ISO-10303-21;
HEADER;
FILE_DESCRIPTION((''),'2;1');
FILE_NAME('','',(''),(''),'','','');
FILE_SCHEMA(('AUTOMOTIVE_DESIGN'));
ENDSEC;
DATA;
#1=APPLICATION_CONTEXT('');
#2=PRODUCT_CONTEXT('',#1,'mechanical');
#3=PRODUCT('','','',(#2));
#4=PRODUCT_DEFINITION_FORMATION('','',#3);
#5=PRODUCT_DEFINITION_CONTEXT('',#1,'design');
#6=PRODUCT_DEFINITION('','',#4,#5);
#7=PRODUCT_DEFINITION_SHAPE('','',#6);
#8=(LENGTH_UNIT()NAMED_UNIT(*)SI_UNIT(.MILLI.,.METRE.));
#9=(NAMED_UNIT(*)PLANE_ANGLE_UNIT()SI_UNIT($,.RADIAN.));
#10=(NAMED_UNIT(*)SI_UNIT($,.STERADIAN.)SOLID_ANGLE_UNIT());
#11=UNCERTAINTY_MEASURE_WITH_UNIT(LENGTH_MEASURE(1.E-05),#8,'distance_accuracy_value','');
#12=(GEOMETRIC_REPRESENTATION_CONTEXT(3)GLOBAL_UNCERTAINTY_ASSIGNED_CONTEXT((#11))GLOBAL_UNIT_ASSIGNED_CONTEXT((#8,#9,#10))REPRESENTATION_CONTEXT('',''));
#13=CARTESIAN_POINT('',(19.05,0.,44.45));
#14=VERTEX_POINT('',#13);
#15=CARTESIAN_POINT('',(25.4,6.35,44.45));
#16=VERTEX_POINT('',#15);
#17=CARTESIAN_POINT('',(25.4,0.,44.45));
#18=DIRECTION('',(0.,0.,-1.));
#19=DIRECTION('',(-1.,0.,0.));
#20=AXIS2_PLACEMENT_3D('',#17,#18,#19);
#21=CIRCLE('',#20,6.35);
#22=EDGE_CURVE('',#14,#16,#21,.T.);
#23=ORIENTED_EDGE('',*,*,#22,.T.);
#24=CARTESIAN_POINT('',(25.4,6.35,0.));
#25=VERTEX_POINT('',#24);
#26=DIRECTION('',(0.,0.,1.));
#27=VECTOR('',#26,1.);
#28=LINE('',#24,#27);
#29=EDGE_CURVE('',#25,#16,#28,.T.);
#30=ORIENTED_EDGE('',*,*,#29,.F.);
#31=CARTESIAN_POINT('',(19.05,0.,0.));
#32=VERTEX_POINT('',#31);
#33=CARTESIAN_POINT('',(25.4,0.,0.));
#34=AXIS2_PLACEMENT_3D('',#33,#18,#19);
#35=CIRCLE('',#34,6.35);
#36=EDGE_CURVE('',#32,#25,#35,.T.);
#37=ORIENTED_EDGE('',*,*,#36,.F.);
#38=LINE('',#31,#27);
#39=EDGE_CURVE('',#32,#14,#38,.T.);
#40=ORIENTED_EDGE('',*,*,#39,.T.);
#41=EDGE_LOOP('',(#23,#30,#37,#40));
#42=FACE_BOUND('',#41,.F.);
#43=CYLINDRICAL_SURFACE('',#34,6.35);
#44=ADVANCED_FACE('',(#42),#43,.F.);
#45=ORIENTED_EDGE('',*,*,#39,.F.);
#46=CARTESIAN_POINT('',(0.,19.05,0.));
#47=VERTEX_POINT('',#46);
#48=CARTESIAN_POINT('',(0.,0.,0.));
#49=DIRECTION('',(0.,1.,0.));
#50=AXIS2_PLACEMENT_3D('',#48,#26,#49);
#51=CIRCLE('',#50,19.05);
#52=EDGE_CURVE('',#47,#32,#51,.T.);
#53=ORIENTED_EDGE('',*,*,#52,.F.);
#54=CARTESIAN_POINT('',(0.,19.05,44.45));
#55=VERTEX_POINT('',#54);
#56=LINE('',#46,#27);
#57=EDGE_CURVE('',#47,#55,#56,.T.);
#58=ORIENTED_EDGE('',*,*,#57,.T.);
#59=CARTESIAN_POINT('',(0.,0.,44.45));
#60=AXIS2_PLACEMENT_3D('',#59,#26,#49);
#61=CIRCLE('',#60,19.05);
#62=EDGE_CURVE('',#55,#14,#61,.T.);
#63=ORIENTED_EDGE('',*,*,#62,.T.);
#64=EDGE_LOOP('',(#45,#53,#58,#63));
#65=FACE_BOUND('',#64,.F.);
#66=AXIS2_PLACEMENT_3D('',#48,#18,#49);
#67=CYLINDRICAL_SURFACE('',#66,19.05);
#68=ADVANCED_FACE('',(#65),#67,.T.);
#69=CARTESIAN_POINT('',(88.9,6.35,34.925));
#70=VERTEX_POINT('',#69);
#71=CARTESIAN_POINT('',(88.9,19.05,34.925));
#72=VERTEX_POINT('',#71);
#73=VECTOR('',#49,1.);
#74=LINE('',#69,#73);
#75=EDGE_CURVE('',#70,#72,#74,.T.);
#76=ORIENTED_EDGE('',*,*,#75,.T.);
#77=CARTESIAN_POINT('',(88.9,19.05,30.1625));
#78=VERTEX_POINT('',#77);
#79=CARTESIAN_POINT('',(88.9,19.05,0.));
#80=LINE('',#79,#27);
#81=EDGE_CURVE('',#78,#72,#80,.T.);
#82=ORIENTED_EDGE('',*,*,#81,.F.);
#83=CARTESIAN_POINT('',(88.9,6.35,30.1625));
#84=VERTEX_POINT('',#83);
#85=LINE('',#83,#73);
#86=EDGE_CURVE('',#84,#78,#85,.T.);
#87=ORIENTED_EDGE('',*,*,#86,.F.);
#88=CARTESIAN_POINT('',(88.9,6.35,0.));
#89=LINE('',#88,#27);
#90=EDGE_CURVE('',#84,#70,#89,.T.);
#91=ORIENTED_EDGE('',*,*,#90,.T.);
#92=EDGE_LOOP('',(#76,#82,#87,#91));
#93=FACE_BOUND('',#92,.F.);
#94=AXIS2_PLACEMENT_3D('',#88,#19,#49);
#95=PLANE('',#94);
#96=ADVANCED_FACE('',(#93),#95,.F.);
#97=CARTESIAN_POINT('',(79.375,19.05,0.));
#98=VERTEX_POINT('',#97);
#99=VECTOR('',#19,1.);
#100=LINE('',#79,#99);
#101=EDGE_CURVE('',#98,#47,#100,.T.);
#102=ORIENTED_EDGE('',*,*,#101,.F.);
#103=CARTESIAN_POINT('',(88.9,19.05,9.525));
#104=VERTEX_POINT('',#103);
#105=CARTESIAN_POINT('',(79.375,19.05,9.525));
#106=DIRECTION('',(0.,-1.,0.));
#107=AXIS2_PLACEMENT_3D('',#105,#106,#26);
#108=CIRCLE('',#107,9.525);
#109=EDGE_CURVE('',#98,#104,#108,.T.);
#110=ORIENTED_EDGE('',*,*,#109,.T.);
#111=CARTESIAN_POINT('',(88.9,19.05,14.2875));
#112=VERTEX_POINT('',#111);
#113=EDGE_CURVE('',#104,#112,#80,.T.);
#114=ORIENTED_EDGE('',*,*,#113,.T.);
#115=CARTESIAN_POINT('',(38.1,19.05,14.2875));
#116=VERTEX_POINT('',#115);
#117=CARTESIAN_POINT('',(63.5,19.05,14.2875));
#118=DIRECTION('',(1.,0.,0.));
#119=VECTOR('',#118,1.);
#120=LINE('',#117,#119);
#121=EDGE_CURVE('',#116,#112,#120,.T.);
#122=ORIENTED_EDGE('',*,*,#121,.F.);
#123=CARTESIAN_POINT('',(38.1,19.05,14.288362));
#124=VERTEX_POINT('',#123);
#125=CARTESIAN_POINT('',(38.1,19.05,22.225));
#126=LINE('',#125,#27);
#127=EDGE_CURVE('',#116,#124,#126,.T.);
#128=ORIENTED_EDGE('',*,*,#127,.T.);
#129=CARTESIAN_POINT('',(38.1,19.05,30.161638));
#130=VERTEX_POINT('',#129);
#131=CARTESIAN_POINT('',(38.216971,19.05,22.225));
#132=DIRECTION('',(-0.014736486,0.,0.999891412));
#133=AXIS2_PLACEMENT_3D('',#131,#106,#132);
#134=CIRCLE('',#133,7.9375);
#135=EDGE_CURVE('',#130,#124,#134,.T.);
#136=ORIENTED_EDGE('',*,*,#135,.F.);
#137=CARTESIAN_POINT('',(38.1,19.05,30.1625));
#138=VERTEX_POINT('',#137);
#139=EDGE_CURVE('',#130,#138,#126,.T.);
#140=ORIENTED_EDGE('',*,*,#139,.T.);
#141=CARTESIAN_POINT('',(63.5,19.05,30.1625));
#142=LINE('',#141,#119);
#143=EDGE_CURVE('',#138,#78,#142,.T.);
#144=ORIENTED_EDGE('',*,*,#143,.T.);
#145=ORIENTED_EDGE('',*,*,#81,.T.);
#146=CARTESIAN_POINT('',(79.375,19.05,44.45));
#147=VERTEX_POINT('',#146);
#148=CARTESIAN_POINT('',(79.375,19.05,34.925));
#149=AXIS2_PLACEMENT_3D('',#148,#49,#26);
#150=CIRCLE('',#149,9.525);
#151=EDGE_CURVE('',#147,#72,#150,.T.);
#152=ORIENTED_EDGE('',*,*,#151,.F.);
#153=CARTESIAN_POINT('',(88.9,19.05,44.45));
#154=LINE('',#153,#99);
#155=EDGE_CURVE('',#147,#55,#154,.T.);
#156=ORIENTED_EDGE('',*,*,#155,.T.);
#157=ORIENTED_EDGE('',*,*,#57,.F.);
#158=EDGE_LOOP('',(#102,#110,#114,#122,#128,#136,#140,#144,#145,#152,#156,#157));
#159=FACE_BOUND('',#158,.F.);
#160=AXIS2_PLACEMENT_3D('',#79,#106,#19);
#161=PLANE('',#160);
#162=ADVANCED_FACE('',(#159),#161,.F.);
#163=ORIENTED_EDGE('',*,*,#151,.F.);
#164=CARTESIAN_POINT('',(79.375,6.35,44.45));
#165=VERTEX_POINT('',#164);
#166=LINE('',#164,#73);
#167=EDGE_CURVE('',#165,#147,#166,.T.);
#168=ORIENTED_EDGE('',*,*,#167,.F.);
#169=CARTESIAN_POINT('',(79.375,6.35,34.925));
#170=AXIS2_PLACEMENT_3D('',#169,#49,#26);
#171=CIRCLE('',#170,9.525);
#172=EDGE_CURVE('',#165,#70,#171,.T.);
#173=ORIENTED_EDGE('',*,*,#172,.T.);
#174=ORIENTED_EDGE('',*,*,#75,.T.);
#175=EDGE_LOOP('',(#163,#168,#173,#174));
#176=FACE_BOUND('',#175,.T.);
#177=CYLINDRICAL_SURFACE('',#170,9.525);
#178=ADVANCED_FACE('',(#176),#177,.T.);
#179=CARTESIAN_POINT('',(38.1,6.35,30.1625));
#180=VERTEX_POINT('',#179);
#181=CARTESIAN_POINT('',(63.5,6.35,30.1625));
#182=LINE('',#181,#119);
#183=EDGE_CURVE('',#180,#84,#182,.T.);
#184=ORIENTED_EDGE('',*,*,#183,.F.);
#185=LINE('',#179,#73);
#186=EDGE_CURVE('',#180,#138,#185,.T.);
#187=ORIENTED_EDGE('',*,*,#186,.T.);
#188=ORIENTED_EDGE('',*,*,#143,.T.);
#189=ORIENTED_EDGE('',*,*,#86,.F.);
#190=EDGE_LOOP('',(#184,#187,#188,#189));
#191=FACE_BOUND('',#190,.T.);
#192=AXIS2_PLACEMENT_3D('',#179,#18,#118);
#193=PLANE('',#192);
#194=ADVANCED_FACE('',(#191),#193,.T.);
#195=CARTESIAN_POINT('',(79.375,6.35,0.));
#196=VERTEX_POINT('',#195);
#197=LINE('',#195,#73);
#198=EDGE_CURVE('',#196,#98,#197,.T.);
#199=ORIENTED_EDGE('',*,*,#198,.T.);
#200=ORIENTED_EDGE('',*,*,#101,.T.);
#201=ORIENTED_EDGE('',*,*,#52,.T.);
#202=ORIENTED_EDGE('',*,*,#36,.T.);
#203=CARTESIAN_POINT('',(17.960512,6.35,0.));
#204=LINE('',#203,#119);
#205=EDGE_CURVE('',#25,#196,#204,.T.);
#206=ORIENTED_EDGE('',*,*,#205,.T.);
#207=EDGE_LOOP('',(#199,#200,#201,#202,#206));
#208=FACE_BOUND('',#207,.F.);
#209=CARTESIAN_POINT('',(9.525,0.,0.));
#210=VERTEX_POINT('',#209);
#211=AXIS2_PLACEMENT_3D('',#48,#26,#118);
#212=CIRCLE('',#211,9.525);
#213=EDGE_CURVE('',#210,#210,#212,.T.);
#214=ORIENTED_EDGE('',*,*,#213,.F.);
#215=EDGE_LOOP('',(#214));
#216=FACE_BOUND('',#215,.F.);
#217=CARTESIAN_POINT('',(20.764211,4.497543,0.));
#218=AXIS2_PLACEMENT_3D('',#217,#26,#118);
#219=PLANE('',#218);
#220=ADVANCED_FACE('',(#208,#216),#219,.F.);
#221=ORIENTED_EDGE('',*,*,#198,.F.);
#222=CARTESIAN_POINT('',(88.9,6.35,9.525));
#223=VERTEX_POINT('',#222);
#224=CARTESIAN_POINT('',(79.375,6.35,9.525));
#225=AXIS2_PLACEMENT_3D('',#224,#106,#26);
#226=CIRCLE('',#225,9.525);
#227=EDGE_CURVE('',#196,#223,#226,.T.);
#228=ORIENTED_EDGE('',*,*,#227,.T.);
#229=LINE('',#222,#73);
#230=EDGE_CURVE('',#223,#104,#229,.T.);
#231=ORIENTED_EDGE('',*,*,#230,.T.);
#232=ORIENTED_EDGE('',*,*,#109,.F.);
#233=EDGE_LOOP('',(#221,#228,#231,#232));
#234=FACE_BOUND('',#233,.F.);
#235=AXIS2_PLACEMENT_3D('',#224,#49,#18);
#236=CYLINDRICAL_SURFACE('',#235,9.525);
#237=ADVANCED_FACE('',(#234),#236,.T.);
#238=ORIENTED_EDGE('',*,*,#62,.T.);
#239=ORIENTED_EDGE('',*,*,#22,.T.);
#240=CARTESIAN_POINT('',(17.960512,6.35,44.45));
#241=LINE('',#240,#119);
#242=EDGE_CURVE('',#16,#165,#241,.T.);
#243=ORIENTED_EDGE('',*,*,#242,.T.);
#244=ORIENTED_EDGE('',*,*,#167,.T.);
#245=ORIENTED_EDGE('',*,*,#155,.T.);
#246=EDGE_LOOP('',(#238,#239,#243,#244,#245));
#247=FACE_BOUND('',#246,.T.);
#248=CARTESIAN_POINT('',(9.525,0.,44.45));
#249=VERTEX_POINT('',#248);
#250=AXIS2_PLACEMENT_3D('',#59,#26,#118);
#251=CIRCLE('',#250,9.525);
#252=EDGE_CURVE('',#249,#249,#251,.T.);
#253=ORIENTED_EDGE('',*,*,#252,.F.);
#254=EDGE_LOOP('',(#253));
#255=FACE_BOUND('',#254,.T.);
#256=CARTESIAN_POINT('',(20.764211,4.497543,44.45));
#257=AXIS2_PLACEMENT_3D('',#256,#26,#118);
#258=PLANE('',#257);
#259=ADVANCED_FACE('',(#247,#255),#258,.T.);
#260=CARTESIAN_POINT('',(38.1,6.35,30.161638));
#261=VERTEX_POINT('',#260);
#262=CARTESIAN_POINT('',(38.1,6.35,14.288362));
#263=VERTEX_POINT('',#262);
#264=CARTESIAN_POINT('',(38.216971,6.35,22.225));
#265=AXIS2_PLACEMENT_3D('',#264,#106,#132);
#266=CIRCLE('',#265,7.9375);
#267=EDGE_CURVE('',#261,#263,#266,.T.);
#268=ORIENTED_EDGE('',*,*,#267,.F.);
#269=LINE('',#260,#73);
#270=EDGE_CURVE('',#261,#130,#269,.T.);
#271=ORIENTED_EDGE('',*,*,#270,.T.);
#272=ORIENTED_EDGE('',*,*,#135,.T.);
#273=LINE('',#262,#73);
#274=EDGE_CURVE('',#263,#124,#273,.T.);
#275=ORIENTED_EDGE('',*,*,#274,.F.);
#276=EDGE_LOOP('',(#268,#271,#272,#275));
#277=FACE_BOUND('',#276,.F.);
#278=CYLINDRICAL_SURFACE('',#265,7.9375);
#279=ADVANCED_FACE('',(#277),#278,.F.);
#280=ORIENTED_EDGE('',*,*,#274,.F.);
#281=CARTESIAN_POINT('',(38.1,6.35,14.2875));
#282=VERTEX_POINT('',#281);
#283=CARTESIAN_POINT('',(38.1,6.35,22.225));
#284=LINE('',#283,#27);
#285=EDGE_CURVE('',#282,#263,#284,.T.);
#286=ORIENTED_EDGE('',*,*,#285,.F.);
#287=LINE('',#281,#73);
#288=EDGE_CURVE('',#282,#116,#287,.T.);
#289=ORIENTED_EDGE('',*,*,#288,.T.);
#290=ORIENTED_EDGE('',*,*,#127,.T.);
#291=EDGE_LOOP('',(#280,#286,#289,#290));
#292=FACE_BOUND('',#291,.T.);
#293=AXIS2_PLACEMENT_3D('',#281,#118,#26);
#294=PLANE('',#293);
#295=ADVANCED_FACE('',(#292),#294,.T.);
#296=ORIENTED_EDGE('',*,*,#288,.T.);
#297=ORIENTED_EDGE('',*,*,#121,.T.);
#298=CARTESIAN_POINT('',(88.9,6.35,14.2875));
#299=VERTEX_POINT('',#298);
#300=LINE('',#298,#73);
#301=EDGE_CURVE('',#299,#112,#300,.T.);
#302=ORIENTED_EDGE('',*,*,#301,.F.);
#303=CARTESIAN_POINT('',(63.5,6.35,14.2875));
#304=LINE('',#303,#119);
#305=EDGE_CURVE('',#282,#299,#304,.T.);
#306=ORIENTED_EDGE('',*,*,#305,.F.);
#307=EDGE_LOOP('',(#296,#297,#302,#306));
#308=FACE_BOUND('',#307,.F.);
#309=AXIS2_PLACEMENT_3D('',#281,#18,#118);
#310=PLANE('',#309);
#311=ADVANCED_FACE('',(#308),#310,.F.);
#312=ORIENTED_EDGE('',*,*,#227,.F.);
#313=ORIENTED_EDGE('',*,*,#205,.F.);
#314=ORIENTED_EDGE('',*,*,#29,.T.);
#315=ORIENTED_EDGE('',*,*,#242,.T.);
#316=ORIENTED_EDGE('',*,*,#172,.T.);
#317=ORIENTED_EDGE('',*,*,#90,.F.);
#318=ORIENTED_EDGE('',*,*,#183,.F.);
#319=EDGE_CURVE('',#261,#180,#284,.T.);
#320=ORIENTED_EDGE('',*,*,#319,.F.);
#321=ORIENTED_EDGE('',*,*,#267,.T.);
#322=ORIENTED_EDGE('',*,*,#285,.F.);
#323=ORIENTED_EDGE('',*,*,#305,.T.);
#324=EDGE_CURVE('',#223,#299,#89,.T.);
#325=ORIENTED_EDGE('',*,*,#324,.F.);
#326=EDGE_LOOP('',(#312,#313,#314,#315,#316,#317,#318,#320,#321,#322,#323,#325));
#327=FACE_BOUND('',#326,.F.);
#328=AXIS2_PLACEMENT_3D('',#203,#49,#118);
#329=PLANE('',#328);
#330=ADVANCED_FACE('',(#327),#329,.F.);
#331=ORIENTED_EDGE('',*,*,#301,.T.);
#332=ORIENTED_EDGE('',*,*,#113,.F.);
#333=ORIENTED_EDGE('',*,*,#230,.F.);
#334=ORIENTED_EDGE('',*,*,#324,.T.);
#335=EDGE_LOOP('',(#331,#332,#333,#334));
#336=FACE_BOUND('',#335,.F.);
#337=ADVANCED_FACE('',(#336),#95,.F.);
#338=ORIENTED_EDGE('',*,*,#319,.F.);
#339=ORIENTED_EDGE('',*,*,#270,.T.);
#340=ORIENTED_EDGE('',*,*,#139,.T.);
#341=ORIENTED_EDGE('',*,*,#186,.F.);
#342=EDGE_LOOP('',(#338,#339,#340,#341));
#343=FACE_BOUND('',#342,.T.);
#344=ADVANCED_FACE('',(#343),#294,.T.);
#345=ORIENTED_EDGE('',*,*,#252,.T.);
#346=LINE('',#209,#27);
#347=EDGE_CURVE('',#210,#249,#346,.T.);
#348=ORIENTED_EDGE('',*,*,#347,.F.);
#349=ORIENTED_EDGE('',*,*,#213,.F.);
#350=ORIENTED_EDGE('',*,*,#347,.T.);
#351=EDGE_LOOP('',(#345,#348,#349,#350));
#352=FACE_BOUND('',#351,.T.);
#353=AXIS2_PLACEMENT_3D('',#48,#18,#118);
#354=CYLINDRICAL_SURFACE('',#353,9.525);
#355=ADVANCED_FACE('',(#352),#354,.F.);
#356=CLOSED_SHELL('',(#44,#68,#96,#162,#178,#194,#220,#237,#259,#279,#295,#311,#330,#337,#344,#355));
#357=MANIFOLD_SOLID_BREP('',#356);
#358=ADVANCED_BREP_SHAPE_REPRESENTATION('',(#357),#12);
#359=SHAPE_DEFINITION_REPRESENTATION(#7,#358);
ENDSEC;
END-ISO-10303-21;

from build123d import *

# Parameters (mm, degrees)
F0_R        = 9.525
F1_DEPTH    = 44.45
F2_W        = 50.8
F2_H        = 15.875
F4_DEPTH    = 12.7
F5_R        = 9.525
F6_T1_DEPTH = 44.45


# Not quite as in the source:
# - a fillet or chamfer that OpenCascade refuses, or shapes differently, is made with other operations: its cross-section is extruded or revolved along the edge and cut away or added
# - a length typed as a fraction of an inch, garbled in the dataset ("3 / 203.2 mm" for 3/8 in), is restored


with BuildPart() as f1:
    # F0 (on Top) → F1 (new body)
    with BuildSketch(Plane.XY):
        with BuildLine():
            ThreePointArc((0, 19.05), (-13.4703841816, -13.4703841816), (19.05, 0))
            ThreePointArc((19.05, 0), (18.7756525614, 3.2213926947), (17.9605122421, 6.35))
            ThreePointArc((17.9605122421, 6.35), (10.9985226281, 15.5542598667), (0, 19.05))
        make_face()
        Circle(F0_R, mode=Mode.SUBTRACT)
        with BuildLine():
            ThreePointArc((0, 19.05), (10.9985226281, 15.5542598667), (17.9605122421, 6.35))
            Line((17.9605122421, 6.35), (88.9, 6.35))
            Line((88.9, 6.35), (88.9, 19.05))
            Line((88.9, 19.05), (0, 19.05))
        make_face()
    extrude(amount=F1_DEPTH)

    # F3 (on face) + F2 (on face) → F4 (cut)
    with BuildSketch(Plane.XZ.offset(-6.35)):
        with BuildLine():
            Line((38.1, 14.2883619165), (38.1, 30.1616380835))
            ThreePointArc((38.1, 30.1616380835), (30.279470861, 22.225), (38.1, 14.2883619165))
        make_face()
    with BuildSketch(Plane.XZ.offset(-6.35)):
        with Locations((63.5, 22.225)):
            Rectangle(F2_W, F2_H)
    extrude(amount=-F4_DEPTH, mode=Mode.SUBTRACT)

    # F5
    f5_edges = [f1.edges().sort_by_distance(p)[0] for p in [
        (88.9, 12.7, 44.45),
        (88.9, 12.7, 0),
    ]]
    fillet(f5_edges, radius=F5_R)

    # F6: fillet of radius 6.35 on 1 edges, made by hand

    # F6_s2 → F6_t1 (join)
    with BuildSketch(Plane.XY):
        with BuildLine():
            ThreePointArc((19.05, 0), (20.9098719395, 4.4901280605), (25.4, 6.35))
            Line((25.4, 6.35), (17.9605122421, 6.35))
            ThreePointArc((17.9605122421, 6.35), (18.7756525614, 3.2213926947), (19.05, 0))
        make_face()
    extrude(amount=F6_T1_DEPTH)


solid = f1.part
